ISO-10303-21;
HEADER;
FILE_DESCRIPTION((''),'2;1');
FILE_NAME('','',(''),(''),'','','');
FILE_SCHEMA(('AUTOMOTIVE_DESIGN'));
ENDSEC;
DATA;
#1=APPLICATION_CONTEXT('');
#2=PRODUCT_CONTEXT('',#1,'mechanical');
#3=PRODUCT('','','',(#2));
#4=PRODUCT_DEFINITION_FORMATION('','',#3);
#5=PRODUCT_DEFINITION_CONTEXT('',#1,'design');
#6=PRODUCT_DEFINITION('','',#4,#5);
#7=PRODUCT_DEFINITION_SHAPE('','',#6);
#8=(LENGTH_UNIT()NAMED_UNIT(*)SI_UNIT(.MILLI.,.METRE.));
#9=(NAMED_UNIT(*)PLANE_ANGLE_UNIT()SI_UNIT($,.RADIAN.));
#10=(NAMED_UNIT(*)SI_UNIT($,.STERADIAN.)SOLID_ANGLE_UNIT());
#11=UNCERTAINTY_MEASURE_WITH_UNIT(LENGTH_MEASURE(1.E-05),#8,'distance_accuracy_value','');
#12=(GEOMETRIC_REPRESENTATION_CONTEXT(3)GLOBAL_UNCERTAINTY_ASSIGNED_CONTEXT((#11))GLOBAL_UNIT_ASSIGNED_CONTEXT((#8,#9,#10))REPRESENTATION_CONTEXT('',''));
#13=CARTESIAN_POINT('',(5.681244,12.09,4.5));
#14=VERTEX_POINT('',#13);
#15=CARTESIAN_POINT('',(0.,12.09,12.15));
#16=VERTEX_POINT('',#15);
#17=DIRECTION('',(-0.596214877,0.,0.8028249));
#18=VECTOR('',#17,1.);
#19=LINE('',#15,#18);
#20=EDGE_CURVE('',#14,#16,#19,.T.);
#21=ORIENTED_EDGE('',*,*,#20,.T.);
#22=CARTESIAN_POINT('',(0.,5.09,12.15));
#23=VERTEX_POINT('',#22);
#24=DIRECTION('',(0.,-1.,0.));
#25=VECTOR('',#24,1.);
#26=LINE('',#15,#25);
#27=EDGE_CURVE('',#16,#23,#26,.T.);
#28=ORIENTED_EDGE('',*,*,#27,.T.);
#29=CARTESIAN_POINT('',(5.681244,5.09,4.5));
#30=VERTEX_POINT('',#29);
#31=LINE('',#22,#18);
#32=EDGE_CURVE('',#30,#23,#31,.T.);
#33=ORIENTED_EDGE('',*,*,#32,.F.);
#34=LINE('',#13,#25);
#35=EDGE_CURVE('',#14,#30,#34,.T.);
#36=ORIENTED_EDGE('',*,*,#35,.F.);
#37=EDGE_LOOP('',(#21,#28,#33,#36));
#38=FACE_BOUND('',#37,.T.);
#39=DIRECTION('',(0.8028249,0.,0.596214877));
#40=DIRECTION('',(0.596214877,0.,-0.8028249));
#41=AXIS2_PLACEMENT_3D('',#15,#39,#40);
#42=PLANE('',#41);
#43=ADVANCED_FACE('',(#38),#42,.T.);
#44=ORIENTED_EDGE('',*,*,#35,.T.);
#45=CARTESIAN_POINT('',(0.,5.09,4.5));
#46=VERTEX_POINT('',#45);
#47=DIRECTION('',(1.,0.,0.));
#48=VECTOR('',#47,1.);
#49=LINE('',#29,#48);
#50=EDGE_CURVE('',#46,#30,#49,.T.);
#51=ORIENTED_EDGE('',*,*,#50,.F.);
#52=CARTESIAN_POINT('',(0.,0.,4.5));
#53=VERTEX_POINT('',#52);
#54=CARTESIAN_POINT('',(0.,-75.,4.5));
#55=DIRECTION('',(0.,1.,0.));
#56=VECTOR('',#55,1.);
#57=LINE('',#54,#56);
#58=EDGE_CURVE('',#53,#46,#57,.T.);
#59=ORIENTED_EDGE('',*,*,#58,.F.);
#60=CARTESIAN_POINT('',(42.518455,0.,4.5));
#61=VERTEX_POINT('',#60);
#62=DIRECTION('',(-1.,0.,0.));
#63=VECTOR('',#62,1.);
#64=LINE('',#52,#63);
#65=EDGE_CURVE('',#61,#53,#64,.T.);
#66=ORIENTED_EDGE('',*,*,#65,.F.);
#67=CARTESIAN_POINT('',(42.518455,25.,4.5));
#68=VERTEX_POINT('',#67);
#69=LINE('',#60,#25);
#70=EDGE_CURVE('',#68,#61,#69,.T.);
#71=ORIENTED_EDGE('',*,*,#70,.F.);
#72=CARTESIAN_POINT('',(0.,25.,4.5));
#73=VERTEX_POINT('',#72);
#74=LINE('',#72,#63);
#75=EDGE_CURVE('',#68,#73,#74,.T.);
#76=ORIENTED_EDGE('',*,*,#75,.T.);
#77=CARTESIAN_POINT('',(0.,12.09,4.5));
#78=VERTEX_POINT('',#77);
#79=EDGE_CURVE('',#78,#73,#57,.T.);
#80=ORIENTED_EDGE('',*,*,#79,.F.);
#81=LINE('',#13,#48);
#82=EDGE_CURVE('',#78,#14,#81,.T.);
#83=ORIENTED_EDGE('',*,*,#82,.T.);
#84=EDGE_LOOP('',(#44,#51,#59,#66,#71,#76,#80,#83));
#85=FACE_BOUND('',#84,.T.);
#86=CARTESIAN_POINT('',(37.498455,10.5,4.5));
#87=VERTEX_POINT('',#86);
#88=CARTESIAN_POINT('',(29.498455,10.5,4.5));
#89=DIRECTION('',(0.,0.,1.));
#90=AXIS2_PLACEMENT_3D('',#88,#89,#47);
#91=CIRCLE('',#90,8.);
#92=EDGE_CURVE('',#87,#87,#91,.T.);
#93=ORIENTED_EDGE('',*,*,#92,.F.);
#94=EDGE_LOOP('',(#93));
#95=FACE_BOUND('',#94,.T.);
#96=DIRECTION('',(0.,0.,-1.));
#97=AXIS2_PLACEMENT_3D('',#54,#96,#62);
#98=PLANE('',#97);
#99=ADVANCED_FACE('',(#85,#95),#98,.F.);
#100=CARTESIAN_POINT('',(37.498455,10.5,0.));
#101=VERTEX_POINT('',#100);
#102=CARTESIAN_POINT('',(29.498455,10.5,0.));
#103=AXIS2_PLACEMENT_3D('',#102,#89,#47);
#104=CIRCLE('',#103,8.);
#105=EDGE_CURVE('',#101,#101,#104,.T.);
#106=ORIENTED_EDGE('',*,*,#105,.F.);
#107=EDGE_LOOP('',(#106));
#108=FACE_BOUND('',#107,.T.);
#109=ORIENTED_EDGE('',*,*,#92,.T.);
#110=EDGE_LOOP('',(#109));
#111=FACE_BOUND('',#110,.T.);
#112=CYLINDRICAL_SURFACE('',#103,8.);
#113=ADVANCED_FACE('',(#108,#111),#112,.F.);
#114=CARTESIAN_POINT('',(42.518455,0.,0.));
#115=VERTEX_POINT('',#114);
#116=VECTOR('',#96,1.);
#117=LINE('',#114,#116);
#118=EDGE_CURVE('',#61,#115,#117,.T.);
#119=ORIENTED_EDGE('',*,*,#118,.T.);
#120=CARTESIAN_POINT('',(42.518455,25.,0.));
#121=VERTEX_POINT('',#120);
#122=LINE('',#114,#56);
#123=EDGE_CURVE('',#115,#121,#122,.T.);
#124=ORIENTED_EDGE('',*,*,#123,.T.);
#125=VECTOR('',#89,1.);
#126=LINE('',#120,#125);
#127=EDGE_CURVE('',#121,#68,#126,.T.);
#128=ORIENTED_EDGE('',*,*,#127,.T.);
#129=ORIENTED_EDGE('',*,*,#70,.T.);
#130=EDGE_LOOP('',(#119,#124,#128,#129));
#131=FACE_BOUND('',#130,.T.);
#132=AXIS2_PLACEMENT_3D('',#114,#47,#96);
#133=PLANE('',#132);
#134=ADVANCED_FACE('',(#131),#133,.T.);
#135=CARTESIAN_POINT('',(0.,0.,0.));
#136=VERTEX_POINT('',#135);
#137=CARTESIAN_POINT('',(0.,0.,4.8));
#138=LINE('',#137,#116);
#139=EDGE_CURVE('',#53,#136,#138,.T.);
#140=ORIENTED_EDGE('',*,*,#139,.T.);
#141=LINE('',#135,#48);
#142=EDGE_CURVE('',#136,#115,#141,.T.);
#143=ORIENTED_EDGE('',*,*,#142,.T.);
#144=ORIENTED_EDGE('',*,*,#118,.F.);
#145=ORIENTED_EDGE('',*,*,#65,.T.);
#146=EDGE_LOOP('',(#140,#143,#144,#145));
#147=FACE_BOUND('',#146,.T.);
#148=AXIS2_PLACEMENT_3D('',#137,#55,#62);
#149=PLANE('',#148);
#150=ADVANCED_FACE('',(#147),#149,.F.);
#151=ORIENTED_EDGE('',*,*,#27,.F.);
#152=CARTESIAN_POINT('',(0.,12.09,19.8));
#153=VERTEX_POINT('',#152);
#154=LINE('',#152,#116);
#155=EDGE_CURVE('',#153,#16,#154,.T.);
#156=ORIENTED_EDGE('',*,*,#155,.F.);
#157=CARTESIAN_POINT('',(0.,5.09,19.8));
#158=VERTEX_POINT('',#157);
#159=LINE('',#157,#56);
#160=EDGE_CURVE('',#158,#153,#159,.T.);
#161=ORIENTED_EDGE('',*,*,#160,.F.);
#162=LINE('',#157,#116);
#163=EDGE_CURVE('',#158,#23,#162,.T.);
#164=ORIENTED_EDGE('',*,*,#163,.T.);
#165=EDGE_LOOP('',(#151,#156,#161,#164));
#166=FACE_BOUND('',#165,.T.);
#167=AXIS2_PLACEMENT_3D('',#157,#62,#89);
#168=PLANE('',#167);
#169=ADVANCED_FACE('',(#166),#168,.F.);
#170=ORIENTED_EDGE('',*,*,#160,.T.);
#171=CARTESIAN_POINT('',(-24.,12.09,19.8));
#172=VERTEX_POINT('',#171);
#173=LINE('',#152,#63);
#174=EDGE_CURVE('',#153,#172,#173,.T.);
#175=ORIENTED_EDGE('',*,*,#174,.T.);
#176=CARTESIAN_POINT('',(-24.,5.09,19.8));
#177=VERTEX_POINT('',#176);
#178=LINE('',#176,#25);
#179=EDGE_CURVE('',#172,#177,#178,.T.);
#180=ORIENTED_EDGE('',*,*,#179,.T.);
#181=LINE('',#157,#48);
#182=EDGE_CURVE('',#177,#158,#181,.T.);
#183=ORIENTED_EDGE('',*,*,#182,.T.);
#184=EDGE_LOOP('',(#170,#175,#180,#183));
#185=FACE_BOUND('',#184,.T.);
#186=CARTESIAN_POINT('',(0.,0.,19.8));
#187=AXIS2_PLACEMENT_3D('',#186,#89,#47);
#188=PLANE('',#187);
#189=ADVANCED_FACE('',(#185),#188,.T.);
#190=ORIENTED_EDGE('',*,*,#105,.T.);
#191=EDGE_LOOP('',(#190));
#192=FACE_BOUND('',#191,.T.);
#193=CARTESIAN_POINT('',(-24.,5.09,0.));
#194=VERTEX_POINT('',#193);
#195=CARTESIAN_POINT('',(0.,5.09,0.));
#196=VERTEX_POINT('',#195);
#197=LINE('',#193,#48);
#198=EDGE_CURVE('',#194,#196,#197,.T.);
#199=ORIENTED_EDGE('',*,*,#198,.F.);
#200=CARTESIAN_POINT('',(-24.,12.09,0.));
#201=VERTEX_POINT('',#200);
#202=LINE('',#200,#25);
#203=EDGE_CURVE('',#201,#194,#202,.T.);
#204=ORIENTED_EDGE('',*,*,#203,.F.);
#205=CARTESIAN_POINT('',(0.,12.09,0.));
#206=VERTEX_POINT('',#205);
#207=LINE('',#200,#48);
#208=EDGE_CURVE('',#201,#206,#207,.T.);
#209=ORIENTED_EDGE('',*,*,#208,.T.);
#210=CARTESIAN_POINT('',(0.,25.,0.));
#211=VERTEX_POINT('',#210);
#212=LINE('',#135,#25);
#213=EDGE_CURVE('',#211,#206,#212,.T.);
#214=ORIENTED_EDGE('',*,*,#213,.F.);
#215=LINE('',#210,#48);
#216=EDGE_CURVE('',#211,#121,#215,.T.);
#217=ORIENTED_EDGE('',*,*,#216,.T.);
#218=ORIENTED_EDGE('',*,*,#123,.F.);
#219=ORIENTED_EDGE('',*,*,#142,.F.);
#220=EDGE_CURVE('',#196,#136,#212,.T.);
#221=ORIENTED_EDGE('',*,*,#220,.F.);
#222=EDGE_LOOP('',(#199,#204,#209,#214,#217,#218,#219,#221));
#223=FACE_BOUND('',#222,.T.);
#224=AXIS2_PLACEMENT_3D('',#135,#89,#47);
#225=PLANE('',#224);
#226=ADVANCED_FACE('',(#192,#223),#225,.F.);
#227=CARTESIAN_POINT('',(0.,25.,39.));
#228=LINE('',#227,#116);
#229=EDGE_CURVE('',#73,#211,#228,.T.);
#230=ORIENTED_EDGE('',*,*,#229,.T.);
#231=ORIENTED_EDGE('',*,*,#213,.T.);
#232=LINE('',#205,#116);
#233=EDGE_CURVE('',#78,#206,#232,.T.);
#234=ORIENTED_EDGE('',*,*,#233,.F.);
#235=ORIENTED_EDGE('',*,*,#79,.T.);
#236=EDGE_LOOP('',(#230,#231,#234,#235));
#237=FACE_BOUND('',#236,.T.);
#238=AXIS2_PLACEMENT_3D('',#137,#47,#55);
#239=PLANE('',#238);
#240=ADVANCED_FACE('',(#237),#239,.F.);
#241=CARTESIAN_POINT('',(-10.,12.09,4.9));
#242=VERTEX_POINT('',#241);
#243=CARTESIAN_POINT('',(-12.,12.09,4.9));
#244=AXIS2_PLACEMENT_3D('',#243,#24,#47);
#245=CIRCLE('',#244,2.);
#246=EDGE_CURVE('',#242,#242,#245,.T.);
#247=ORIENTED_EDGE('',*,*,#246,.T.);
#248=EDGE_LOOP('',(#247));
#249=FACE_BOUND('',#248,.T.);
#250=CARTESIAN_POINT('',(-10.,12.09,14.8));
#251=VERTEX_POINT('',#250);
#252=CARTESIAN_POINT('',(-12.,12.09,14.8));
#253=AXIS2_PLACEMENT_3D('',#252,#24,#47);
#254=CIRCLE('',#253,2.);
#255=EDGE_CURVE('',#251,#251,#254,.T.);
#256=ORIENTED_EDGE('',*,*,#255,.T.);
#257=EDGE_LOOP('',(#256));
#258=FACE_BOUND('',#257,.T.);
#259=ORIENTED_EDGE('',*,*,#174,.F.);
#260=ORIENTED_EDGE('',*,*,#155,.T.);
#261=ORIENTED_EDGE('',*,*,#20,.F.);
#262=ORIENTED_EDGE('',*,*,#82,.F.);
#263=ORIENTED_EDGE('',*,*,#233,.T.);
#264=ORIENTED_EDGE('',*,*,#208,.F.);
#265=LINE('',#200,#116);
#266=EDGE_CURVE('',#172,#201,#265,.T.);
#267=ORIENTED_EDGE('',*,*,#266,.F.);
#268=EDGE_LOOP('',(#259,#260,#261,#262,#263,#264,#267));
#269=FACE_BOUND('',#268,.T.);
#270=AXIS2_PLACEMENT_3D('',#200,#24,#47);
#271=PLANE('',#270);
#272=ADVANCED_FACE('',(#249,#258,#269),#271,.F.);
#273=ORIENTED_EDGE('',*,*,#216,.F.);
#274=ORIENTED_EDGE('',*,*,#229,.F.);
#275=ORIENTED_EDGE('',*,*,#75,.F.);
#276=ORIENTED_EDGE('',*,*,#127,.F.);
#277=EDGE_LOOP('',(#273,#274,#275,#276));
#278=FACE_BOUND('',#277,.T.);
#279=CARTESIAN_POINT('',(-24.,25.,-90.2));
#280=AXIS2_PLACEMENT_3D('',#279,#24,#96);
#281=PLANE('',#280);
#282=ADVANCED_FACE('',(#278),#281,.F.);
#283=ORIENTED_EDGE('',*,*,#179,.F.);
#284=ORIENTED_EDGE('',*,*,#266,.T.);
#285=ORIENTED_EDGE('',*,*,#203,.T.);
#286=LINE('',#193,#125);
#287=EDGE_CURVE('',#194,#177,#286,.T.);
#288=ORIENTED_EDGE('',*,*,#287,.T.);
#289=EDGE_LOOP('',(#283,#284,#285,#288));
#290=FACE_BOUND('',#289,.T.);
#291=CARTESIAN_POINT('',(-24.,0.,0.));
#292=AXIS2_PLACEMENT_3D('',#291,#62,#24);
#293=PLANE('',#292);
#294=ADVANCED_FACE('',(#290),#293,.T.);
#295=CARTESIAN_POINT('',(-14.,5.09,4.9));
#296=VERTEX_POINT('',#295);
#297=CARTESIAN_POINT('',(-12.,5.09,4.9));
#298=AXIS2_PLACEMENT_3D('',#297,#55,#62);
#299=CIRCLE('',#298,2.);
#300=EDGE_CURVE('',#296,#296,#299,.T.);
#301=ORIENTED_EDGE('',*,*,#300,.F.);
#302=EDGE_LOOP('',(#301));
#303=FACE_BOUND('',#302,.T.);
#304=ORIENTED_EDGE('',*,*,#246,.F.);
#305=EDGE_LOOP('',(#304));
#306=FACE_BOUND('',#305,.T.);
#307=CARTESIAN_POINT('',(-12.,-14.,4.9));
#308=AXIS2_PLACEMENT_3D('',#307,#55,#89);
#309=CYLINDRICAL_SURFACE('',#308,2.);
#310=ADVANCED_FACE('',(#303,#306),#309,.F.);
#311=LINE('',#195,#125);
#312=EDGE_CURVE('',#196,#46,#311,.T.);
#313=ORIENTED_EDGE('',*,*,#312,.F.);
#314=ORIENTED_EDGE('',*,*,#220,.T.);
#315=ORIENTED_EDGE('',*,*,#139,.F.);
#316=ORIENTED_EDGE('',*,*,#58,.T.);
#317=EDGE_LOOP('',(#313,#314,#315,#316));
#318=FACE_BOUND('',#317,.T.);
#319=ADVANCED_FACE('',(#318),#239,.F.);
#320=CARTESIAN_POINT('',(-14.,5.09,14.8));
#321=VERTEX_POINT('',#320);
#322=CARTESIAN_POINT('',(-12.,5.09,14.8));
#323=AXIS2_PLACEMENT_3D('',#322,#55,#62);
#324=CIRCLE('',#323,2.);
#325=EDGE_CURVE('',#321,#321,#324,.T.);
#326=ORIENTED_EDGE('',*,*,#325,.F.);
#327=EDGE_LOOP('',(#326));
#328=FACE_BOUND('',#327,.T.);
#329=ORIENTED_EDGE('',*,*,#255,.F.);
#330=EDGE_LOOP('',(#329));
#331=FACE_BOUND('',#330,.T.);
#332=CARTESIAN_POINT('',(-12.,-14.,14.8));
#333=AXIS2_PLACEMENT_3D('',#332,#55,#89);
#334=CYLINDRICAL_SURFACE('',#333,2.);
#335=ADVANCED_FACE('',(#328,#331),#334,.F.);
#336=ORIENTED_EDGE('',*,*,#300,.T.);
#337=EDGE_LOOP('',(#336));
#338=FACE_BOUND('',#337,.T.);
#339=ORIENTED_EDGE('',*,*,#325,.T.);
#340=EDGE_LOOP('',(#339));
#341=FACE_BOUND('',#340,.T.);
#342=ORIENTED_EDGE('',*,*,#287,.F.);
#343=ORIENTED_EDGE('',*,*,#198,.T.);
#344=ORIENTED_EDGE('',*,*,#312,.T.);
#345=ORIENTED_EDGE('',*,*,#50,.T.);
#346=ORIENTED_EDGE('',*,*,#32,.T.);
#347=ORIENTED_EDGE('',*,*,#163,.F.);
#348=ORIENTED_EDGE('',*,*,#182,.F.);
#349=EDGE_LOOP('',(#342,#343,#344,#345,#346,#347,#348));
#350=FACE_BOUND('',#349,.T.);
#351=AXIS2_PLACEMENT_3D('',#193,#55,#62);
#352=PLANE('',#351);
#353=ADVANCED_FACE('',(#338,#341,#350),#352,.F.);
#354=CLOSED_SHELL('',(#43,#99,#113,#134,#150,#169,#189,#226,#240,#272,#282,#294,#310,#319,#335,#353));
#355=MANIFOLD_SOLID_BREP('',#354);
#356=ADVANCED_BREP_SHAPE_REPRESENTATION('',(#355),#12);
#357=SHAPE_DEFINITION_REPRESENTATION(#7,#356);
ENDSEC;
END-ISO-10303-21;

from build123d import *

# Parameters (mm, degrees)
SKETCH1_R                 = 11
SKETCH1_R_2               = 8
BOSS_EXTRUDE1_DEPTH       = 4.8
SKETCH2_W                 = 44.821432693
SKETCH2_H                 = 40.097165435
SKETCH2_R                 = 11
BOSS_EXTRUDE2_DEPTH       = 8.2
SKETCH3_W                 = 24
SKETCH3_H                 = 15
SKETCH3_R                 = 8
BOSS_EXTRUDE3_DEPTH       = 5
BOSS_EXTRUDE4_OUTLINE_W   = 48.178567307
BOSS_EXTRUDE4_OUTLINE_H   = 40.5
BOSS_EXTRUDE4_OUTLINE_R   = 1.6
BOSS_EXTRUDE4_OUTLINE_R_2 = 6.35
BOSS_EXTRUDE4_OUTLINE_R_3 = 2.1
BOSS_EXTRUDE4_DEPTH       = 5
BOSS_EXTRUDE5_DEPTH       = 5
SKETCH6_W                 = 48.178567307
SKETCH6_H                 = 17.568704936
BOSS_EXTRUDE6_DEPTH       = 5
SKETCH8_R                 = 2
CUT_EXTRUDE1_DEPTH        = 127.437257167
CUT_EXTRUDE2_START        = -23.95
CUT_EXTRUDE2_OUTLINE_W    = 64.98154514
CUT_EXTRUDE2_OUTLINE_H    = 102.7
CUT_EXTRUDE2_OUTLINE_R    = 11
CUT_EXTRUDE2_DEPTH        = 23.95
CUT_EXTRUDE2_START_2      = -45.3
CUT_EXTRUDE2_2_DEPTH      = 21.35
SKETCH13_W                = 48.029963693
SKETCH13_H                = 72.7
CUT_EXTRUDE5_DEPTH        = 100
SKETCH14_W                = 52.01845486
SKETCH14_H                = 5
CUT_EXTRUDE6_DEPTH        = 100
SKETCH15_W                = 24
SKETCH15_H                = 10
BOSS_EXTRUDE7_DEPTH       = 10
SKETCH16_R                = 2
CUT_EXTRUDE7_DEPTH        = 30
SKETCH17_W                = 28.01845486
SKETCH17_H                = 5.3
CUT_EXTRUDE11_DEPTH       = 100
SKETCH18_W                = 24
SKETCH18_H                = 4.59
CUT_EXTRUDE12_DEPTH       = 43.450839953
SKETCH19_W                = 4.5
SKETCH19_H                = 7
BOSS_EXTRUDE8_DEPTH       = 24
SKETCH20_W                = 24
SKETCH20_H                = 7
BOSS_EXTRUDE9_DEPTH       = 15.3
SKETCH21_R                = 2
CUT_EXTRUDE13_DEPTH       = 39
SKETCH22_W                = 24
SKETCH22_H                = 5.41
CUT_EXTRUDE14_DEPTH       = 39
BOSS_EXTRUDE11_START      = -7
BOSS_EXTRUDE11_DEPTH      = 7
SKETCH26_W                = 4.5
SKETCH26_H                = 25
BOSS_EXTRUDE12_DEPTH      = 14.5
BOSS_EXTRUDE13_START      = -4.5
SKETCH27_R                = 8
BOSS_EXTRUDE13_DEPTH      = 4.5
SKETCH28_R                = 8
CUT_EXTRUDE15_DEPTH       = 4.5


# Read off the part's stored shape, not the designer's step: Boss-Extrude4, Cut-Extrude2
with BuildPart() as part:
    # Sketch1 → Boss-Extrude1 (new body)
    # profile 1 of 2: a face of its own
    with BuildSketch(Plane.XY):
        Polygon((0, 0), (93, 0), (93, 102.7), (0, 102.7), (0, 30), (-24, 30), (-24, 15), (0, 15), align=None)
        with Locations((15, 10.5)):
            Circle(SKETCH1_R, mode=Mode.SUBTRACT)
        with Locations((70, 72)):
            Circle(SKETCH1_R, mode=Mode.SUBTRACT)
    # profile 2 of 2: a face of its own
    with BuildSketch(Plane.XY):
        with BuildLine():
            ThreePointArc((26, 10.5), (8.48332569, 19.36188219), (11.721280738, 0))
            Line((11.721280738, 0), (18.278719262, 0))
            ThreePointArc((18.278719262, 0), (23.86188219, 3.98332569), (26, 10.5))
        make_face()
        with Locations((15, 10.5)):
            Circle(SKETCH1_R_2, mode=Mode.SUBTRACT)
    extrude(amount=BOSS_EXTRUDE1_DEPTH)

    # Sketch2 → Boss-Extrude2 (add)
    with BuildSketch(Plane.XY.offset(4.8)):
        with Locations((70.589283654, 72.714594712)):
            Rectangle(SKETCH2_W, SKETCH2_H)
        with Locations((70, 72)):
            Circle(SKETCH2_R, mode=Mode.SUBTRACT)
    extrude(amount=BOSS_EXTRUDE2_DEPTH)

    # Sketch3 → Boss-Extrude3 (add)
    # profile 1 of 2: a face of its own
    with BuildSketch(Plane.XY.offset(4.8)):
        with Locations((-12, 22.5)):
            Rectangle(SKETCH3_W, SKETCH3_H)
    # profile 2 of 2: a face of its own
    with BuildSketch(Plane.XY.offset(4.8)):
        Polygon((0, 30), (0, 15), (0, 0), (93, 0), (93, 52.666011994), (48.178567307, 52.666011994), (0, 52.666011994), align=None)
        with Locations((15, 10.5)):
            Circle(SKETCH3_R, mode=Mode.SUBTRACT)
    extrude(amount=BOSS_EXTRUDE3_DEPTH)

    # Boss-Extrude4 outline → Boss-Extrude4 (add)
    # profile 1 of 2: a face of its own
    with BuildSketch(Plane.XZ.offset(-75.23471693)):
        with Locations((24.089283654, 25.05)):
            Rectangle(BOSS_EXTRUDE4_OUTLINE_W, BOSS_EXTRUDE4_OUTLINE_H)
        with Locations((22.860422048, 23.3)):
            Circle(BOSS_EXTRUDE4_OUTLINE_R, mode=Mode.SUBTRACT)
        with Locations((38.360422048, 30.3)):
            Circle(BOSS_EXTRUDE4_OUTLINE_R_2, mode=Mode.SUBTRACT)
        with Locations((30.610422048, 36.723393759)):
            Circle(BOSS_EXTRUDE4_OUTLINE_R, mode=Mode.SUBTRACT)
        with Locations((46.110422048, 36.723393759)):
            Circle(BOSS_EXTRUDE4_OUTLINE_R, mode=Mode.SUBTRACT)
    # profile 2 of 2: a face of its own
    with BuildSketch(Plane.XZ.offset(-75.23471693)):
        with Locations((51.783815806, 31.05)):
            Circle(BOSS_EXTRUDE4_OUTLINE_R_3)
    extrude(amount=BOSS_EXTRUDE4_DEPTH)

    # Sketch5 → Boss-Extrude5 (add)
    with BuildSketch(Plane(origin=(48.178567307, 0, 0), x_dir=(0, 0, -1), z_dir=(1, 0, 0))):
        Polygon((-45.3, 75.23471693), (-13, 92.763177429), (-4.8, 92.763177429), (-4.8, 70.23471693), (-45.3, 70.23471693), align=None)
    extrude(amount=-BOSS_EXTRUDE5_DEPTH)

    # Sketch6 → Boss-Extrude6 (add)
    with BuildSketch(Plane.XY.offset(4.8)):
        with Locations((24.089283654, 61.450364462)):
            Rectangle(SKETCH6_W, SKETCH6_H)
    extrude(amount=BOSS_EXTRUDE6_DEPTH)

    # Sketch8 → Cut-Extrude1 (cut, through all)
    with BuildSketch(Plane(origin=(0, 30, 0), x_dir=(1, 0, 0), z_dir=(0, 1, 0))):
        with Locations(Location((-12, -4.9, 0), (0, 0, 180))):
            Circle(SKETCH8_R)
    extrude(amount=-CUT_EXTRUDE1_DEPTH, mode=Mode.SUBTRACT)

    # Cut-Extrude2 outline → Cut-Extrude2 (cut)
    with BuildSketch(Plane(origin=(0, 0, 0), x_dir=(-1, 0, 0), z_dir=(0, 0, -1)).offset(CUT_EXTRUDE2_START)):
        with Locations((-60.50922743, 51.35)):
            Rectangle(CUT_EXTRUDE2_OUTLINE_W, CUT_EXTRUDE2_OUTLINE_H)
        with Locations((-70, 72)):
            Circle(CUT_EXTRUDE2_OUTLINE_R, mode=Mode.SUBTRACT)
    extrude(amount=CUT_EXTRUDE2_DEPTH, mode=Mode.SUBTRACT)

    # Cut-Extrude2 2 outline → Cut-Extrude2 2 (cut)
    with BuildSketch(Plane(origin=(0, 0, 0), x_dir=(-1, 0, 0), z_dir=(0, 0, -1)).offset(CUT_EXTRUDE2_START_2)):
        Polygon((-28.01845486, 70.23471693), (-28.01845486, 75.23471693), (-43.178567307, 75.23471693), (-43.178567307, 92.763177429), (-48.178567307, 92.763177429), (-48.178567307, 70.23471693), align=None)
    extrude(amount=CUT_EXTRUDE2_2_DEPTH, mode=Mode.SUBTRACT)

    # Sketch13 → Cut-Extrude5 (cut)
    with BuildSketch(Plane.ZY):
        with Locations((24.014981847, 66.35)):
            Rectangle(SKETCH13_W, SKETCH13_H)
    extrude(amount=-CUT_EXTRUDE5_DEPTH, mode=Mode.SUBTRACT)

    # Sketch14 → Cut-Extrude6 (cut)
    with BuildSketch(Plane.XY.offset(9.8)):
        with Locations((2.00922743, 27.5)):
            Rectangle(SKETCH14_W, SKETCH14_H)
    extrude(amount=-CUT_EXTRUDE6_DEPTH, mode=Mode.SUBTRACT)

    # Sketch15 → Boss-Extrude7 (add)
    with BuildSketch(Plane.XY.offset(9.8)):
        with Locations((-12, 20)):
            Rectangle(SKETCH15_W, SKETCH15_H)
    extrude(amount=BOSS_EXTRUDE7_DEPTH)

    # Sketch16 → Cut-Extrude7 (cut)
    with BuildSketch(Plane(origin=(0, 25, 0), x_dir=(1, 0, 0), z_dir=(0, 1, 0))):
        with Locations(Location((-12, -14.8, 0), (0, 0, 270))):
            Circle(SKETCH16_R)
    extrude(amount=-CUT_EXTRUDE7_DEPTH, mode=Mode.SUBTRACT)

    # Sketch17 → Cut-Extrude11 (cut)
    with BuildSketch(Plane(origin=(0, 25, 0), x_dir=(1, 0, 0), z_dir=(0, 1, 0))):
        with Locations((14.00922743, -7.15)):
            Rectangle(SKETCH17_W, SKETCH17_H)
    extrude(amount=-CUT_EXTRUDE11_DEPTH, mode=Mode.SUBTRACT)

    # Sketch18 → Cut-Extrude12 (cut, through all)
    with BuildSketch(Plane(origin=(0, 0, 0), x_dir=(-1, 0, 0), z_dir=(0, 0, -1))):
        with Locations((12, 17.295)):
            Rectangle(SKETCH18_W, SKETCH18_H)
    extrude(amount=-CUT_EXTRUDE12_DEPTH, mode=Mode.SUBTRACT)

    # Sketch19 → Boss-Extrude8 (add)
    with BuildSketch(Plane.ZY):
        with Locations((2.25, 8.59)):
            Rectangle(SKETCH19_W, SKETCH19_H)
    extrude(amount=BOSS_EXTRUDE8_DEPTH)

    # Sketch20 → Boss-Extrude9 (add)
    with BuildSketch(Plane.XY.offset(4.5)):
        with Locations((-12, 8.59)):
            Rectangle(SKETCH20_W, SKETCH20_H)
    extrude(amount=BOSS_EXTRUDE9_DEPTH)

    # Sketch21 → Cut-Extrude13 (cut)
    with BuildSketch(Plane(origin=(0, 25, 0), x_dir=(1, 0, 0), z_dir=(0, 1, 0))):
        with Locations(Location((-12, -4.9, 0), (0, 0, 180))):
            Circle(SKETCH21_R)
        with Locations(Location((-12, -14.8, 0), (0, 0, 270))):
            Circle(SKETCH21_R)
    extrude(amount=-CUT_EXTRUDE13_DEPTH, mode=Mode.SUBTRACT)

    # Sketch22 → Cut-Extrude14 (cut)
    with BuildSketch(Plane(origin=(0, 0, 0), x_dir=(-1, 0, 0), z_dir=(0, 0, -1))):
        with Locations((12, 22.295)):
            Rectangle(SKETCH22_W, SKETCH22_H)
    extrude(amount=-CUT_EXTRUDE14_DEPTH, mode=Mode.SUBTRACT)

    # Sketch25 → Boss-Extrude11 (add)
    with BuildSketch(Plane.XZ.offset(-5.09).offset(BOSS_EXTRUDE11_START)):
        Polygon((0, 4.5), (0, 12.15), (5.681243584, 4.5), align=None)
    extrude(amount=BOSS_EXTRUDE11_DEPTH)

    # Sketch26 → Boss-Extrude12 (add)
    with BuildSketch(Plane(origin=(28.01845486, 0, 0), x_dir=(0, 0, -1), z_dir=(1, 0, 0))):
        with Locations((-2.25, 12.5)):
            Rectangle(SKETCH26_W, SKETCH26_H)
    extrude(amount=BOSS_EXTRUDE12_DEPTH)

    # Sketch27 → Boss-Extrude13 (add)
    with BuildSketch(Plane.XY.offset(4.5).offset(BOSS_EXTRUDE13_START)):
        with Locations((15, 10.5)):
            Circle(SKETCH27_R)
    extrude(amount=BOSS_EXTRUDE13_DEPTH)

    # Sketch28 → Cut-Extrude15 (cut)
    with BuildSketch(Plane.XY.offset(4.5)):
        with Locations((29.49845486, 10.5)):
            Circle(SKETCH28_R)
    extrude(amount=-CUT_EXTRUDE15_DEPTH, mode=Mode.SUBTRACT)


solid = part.part
